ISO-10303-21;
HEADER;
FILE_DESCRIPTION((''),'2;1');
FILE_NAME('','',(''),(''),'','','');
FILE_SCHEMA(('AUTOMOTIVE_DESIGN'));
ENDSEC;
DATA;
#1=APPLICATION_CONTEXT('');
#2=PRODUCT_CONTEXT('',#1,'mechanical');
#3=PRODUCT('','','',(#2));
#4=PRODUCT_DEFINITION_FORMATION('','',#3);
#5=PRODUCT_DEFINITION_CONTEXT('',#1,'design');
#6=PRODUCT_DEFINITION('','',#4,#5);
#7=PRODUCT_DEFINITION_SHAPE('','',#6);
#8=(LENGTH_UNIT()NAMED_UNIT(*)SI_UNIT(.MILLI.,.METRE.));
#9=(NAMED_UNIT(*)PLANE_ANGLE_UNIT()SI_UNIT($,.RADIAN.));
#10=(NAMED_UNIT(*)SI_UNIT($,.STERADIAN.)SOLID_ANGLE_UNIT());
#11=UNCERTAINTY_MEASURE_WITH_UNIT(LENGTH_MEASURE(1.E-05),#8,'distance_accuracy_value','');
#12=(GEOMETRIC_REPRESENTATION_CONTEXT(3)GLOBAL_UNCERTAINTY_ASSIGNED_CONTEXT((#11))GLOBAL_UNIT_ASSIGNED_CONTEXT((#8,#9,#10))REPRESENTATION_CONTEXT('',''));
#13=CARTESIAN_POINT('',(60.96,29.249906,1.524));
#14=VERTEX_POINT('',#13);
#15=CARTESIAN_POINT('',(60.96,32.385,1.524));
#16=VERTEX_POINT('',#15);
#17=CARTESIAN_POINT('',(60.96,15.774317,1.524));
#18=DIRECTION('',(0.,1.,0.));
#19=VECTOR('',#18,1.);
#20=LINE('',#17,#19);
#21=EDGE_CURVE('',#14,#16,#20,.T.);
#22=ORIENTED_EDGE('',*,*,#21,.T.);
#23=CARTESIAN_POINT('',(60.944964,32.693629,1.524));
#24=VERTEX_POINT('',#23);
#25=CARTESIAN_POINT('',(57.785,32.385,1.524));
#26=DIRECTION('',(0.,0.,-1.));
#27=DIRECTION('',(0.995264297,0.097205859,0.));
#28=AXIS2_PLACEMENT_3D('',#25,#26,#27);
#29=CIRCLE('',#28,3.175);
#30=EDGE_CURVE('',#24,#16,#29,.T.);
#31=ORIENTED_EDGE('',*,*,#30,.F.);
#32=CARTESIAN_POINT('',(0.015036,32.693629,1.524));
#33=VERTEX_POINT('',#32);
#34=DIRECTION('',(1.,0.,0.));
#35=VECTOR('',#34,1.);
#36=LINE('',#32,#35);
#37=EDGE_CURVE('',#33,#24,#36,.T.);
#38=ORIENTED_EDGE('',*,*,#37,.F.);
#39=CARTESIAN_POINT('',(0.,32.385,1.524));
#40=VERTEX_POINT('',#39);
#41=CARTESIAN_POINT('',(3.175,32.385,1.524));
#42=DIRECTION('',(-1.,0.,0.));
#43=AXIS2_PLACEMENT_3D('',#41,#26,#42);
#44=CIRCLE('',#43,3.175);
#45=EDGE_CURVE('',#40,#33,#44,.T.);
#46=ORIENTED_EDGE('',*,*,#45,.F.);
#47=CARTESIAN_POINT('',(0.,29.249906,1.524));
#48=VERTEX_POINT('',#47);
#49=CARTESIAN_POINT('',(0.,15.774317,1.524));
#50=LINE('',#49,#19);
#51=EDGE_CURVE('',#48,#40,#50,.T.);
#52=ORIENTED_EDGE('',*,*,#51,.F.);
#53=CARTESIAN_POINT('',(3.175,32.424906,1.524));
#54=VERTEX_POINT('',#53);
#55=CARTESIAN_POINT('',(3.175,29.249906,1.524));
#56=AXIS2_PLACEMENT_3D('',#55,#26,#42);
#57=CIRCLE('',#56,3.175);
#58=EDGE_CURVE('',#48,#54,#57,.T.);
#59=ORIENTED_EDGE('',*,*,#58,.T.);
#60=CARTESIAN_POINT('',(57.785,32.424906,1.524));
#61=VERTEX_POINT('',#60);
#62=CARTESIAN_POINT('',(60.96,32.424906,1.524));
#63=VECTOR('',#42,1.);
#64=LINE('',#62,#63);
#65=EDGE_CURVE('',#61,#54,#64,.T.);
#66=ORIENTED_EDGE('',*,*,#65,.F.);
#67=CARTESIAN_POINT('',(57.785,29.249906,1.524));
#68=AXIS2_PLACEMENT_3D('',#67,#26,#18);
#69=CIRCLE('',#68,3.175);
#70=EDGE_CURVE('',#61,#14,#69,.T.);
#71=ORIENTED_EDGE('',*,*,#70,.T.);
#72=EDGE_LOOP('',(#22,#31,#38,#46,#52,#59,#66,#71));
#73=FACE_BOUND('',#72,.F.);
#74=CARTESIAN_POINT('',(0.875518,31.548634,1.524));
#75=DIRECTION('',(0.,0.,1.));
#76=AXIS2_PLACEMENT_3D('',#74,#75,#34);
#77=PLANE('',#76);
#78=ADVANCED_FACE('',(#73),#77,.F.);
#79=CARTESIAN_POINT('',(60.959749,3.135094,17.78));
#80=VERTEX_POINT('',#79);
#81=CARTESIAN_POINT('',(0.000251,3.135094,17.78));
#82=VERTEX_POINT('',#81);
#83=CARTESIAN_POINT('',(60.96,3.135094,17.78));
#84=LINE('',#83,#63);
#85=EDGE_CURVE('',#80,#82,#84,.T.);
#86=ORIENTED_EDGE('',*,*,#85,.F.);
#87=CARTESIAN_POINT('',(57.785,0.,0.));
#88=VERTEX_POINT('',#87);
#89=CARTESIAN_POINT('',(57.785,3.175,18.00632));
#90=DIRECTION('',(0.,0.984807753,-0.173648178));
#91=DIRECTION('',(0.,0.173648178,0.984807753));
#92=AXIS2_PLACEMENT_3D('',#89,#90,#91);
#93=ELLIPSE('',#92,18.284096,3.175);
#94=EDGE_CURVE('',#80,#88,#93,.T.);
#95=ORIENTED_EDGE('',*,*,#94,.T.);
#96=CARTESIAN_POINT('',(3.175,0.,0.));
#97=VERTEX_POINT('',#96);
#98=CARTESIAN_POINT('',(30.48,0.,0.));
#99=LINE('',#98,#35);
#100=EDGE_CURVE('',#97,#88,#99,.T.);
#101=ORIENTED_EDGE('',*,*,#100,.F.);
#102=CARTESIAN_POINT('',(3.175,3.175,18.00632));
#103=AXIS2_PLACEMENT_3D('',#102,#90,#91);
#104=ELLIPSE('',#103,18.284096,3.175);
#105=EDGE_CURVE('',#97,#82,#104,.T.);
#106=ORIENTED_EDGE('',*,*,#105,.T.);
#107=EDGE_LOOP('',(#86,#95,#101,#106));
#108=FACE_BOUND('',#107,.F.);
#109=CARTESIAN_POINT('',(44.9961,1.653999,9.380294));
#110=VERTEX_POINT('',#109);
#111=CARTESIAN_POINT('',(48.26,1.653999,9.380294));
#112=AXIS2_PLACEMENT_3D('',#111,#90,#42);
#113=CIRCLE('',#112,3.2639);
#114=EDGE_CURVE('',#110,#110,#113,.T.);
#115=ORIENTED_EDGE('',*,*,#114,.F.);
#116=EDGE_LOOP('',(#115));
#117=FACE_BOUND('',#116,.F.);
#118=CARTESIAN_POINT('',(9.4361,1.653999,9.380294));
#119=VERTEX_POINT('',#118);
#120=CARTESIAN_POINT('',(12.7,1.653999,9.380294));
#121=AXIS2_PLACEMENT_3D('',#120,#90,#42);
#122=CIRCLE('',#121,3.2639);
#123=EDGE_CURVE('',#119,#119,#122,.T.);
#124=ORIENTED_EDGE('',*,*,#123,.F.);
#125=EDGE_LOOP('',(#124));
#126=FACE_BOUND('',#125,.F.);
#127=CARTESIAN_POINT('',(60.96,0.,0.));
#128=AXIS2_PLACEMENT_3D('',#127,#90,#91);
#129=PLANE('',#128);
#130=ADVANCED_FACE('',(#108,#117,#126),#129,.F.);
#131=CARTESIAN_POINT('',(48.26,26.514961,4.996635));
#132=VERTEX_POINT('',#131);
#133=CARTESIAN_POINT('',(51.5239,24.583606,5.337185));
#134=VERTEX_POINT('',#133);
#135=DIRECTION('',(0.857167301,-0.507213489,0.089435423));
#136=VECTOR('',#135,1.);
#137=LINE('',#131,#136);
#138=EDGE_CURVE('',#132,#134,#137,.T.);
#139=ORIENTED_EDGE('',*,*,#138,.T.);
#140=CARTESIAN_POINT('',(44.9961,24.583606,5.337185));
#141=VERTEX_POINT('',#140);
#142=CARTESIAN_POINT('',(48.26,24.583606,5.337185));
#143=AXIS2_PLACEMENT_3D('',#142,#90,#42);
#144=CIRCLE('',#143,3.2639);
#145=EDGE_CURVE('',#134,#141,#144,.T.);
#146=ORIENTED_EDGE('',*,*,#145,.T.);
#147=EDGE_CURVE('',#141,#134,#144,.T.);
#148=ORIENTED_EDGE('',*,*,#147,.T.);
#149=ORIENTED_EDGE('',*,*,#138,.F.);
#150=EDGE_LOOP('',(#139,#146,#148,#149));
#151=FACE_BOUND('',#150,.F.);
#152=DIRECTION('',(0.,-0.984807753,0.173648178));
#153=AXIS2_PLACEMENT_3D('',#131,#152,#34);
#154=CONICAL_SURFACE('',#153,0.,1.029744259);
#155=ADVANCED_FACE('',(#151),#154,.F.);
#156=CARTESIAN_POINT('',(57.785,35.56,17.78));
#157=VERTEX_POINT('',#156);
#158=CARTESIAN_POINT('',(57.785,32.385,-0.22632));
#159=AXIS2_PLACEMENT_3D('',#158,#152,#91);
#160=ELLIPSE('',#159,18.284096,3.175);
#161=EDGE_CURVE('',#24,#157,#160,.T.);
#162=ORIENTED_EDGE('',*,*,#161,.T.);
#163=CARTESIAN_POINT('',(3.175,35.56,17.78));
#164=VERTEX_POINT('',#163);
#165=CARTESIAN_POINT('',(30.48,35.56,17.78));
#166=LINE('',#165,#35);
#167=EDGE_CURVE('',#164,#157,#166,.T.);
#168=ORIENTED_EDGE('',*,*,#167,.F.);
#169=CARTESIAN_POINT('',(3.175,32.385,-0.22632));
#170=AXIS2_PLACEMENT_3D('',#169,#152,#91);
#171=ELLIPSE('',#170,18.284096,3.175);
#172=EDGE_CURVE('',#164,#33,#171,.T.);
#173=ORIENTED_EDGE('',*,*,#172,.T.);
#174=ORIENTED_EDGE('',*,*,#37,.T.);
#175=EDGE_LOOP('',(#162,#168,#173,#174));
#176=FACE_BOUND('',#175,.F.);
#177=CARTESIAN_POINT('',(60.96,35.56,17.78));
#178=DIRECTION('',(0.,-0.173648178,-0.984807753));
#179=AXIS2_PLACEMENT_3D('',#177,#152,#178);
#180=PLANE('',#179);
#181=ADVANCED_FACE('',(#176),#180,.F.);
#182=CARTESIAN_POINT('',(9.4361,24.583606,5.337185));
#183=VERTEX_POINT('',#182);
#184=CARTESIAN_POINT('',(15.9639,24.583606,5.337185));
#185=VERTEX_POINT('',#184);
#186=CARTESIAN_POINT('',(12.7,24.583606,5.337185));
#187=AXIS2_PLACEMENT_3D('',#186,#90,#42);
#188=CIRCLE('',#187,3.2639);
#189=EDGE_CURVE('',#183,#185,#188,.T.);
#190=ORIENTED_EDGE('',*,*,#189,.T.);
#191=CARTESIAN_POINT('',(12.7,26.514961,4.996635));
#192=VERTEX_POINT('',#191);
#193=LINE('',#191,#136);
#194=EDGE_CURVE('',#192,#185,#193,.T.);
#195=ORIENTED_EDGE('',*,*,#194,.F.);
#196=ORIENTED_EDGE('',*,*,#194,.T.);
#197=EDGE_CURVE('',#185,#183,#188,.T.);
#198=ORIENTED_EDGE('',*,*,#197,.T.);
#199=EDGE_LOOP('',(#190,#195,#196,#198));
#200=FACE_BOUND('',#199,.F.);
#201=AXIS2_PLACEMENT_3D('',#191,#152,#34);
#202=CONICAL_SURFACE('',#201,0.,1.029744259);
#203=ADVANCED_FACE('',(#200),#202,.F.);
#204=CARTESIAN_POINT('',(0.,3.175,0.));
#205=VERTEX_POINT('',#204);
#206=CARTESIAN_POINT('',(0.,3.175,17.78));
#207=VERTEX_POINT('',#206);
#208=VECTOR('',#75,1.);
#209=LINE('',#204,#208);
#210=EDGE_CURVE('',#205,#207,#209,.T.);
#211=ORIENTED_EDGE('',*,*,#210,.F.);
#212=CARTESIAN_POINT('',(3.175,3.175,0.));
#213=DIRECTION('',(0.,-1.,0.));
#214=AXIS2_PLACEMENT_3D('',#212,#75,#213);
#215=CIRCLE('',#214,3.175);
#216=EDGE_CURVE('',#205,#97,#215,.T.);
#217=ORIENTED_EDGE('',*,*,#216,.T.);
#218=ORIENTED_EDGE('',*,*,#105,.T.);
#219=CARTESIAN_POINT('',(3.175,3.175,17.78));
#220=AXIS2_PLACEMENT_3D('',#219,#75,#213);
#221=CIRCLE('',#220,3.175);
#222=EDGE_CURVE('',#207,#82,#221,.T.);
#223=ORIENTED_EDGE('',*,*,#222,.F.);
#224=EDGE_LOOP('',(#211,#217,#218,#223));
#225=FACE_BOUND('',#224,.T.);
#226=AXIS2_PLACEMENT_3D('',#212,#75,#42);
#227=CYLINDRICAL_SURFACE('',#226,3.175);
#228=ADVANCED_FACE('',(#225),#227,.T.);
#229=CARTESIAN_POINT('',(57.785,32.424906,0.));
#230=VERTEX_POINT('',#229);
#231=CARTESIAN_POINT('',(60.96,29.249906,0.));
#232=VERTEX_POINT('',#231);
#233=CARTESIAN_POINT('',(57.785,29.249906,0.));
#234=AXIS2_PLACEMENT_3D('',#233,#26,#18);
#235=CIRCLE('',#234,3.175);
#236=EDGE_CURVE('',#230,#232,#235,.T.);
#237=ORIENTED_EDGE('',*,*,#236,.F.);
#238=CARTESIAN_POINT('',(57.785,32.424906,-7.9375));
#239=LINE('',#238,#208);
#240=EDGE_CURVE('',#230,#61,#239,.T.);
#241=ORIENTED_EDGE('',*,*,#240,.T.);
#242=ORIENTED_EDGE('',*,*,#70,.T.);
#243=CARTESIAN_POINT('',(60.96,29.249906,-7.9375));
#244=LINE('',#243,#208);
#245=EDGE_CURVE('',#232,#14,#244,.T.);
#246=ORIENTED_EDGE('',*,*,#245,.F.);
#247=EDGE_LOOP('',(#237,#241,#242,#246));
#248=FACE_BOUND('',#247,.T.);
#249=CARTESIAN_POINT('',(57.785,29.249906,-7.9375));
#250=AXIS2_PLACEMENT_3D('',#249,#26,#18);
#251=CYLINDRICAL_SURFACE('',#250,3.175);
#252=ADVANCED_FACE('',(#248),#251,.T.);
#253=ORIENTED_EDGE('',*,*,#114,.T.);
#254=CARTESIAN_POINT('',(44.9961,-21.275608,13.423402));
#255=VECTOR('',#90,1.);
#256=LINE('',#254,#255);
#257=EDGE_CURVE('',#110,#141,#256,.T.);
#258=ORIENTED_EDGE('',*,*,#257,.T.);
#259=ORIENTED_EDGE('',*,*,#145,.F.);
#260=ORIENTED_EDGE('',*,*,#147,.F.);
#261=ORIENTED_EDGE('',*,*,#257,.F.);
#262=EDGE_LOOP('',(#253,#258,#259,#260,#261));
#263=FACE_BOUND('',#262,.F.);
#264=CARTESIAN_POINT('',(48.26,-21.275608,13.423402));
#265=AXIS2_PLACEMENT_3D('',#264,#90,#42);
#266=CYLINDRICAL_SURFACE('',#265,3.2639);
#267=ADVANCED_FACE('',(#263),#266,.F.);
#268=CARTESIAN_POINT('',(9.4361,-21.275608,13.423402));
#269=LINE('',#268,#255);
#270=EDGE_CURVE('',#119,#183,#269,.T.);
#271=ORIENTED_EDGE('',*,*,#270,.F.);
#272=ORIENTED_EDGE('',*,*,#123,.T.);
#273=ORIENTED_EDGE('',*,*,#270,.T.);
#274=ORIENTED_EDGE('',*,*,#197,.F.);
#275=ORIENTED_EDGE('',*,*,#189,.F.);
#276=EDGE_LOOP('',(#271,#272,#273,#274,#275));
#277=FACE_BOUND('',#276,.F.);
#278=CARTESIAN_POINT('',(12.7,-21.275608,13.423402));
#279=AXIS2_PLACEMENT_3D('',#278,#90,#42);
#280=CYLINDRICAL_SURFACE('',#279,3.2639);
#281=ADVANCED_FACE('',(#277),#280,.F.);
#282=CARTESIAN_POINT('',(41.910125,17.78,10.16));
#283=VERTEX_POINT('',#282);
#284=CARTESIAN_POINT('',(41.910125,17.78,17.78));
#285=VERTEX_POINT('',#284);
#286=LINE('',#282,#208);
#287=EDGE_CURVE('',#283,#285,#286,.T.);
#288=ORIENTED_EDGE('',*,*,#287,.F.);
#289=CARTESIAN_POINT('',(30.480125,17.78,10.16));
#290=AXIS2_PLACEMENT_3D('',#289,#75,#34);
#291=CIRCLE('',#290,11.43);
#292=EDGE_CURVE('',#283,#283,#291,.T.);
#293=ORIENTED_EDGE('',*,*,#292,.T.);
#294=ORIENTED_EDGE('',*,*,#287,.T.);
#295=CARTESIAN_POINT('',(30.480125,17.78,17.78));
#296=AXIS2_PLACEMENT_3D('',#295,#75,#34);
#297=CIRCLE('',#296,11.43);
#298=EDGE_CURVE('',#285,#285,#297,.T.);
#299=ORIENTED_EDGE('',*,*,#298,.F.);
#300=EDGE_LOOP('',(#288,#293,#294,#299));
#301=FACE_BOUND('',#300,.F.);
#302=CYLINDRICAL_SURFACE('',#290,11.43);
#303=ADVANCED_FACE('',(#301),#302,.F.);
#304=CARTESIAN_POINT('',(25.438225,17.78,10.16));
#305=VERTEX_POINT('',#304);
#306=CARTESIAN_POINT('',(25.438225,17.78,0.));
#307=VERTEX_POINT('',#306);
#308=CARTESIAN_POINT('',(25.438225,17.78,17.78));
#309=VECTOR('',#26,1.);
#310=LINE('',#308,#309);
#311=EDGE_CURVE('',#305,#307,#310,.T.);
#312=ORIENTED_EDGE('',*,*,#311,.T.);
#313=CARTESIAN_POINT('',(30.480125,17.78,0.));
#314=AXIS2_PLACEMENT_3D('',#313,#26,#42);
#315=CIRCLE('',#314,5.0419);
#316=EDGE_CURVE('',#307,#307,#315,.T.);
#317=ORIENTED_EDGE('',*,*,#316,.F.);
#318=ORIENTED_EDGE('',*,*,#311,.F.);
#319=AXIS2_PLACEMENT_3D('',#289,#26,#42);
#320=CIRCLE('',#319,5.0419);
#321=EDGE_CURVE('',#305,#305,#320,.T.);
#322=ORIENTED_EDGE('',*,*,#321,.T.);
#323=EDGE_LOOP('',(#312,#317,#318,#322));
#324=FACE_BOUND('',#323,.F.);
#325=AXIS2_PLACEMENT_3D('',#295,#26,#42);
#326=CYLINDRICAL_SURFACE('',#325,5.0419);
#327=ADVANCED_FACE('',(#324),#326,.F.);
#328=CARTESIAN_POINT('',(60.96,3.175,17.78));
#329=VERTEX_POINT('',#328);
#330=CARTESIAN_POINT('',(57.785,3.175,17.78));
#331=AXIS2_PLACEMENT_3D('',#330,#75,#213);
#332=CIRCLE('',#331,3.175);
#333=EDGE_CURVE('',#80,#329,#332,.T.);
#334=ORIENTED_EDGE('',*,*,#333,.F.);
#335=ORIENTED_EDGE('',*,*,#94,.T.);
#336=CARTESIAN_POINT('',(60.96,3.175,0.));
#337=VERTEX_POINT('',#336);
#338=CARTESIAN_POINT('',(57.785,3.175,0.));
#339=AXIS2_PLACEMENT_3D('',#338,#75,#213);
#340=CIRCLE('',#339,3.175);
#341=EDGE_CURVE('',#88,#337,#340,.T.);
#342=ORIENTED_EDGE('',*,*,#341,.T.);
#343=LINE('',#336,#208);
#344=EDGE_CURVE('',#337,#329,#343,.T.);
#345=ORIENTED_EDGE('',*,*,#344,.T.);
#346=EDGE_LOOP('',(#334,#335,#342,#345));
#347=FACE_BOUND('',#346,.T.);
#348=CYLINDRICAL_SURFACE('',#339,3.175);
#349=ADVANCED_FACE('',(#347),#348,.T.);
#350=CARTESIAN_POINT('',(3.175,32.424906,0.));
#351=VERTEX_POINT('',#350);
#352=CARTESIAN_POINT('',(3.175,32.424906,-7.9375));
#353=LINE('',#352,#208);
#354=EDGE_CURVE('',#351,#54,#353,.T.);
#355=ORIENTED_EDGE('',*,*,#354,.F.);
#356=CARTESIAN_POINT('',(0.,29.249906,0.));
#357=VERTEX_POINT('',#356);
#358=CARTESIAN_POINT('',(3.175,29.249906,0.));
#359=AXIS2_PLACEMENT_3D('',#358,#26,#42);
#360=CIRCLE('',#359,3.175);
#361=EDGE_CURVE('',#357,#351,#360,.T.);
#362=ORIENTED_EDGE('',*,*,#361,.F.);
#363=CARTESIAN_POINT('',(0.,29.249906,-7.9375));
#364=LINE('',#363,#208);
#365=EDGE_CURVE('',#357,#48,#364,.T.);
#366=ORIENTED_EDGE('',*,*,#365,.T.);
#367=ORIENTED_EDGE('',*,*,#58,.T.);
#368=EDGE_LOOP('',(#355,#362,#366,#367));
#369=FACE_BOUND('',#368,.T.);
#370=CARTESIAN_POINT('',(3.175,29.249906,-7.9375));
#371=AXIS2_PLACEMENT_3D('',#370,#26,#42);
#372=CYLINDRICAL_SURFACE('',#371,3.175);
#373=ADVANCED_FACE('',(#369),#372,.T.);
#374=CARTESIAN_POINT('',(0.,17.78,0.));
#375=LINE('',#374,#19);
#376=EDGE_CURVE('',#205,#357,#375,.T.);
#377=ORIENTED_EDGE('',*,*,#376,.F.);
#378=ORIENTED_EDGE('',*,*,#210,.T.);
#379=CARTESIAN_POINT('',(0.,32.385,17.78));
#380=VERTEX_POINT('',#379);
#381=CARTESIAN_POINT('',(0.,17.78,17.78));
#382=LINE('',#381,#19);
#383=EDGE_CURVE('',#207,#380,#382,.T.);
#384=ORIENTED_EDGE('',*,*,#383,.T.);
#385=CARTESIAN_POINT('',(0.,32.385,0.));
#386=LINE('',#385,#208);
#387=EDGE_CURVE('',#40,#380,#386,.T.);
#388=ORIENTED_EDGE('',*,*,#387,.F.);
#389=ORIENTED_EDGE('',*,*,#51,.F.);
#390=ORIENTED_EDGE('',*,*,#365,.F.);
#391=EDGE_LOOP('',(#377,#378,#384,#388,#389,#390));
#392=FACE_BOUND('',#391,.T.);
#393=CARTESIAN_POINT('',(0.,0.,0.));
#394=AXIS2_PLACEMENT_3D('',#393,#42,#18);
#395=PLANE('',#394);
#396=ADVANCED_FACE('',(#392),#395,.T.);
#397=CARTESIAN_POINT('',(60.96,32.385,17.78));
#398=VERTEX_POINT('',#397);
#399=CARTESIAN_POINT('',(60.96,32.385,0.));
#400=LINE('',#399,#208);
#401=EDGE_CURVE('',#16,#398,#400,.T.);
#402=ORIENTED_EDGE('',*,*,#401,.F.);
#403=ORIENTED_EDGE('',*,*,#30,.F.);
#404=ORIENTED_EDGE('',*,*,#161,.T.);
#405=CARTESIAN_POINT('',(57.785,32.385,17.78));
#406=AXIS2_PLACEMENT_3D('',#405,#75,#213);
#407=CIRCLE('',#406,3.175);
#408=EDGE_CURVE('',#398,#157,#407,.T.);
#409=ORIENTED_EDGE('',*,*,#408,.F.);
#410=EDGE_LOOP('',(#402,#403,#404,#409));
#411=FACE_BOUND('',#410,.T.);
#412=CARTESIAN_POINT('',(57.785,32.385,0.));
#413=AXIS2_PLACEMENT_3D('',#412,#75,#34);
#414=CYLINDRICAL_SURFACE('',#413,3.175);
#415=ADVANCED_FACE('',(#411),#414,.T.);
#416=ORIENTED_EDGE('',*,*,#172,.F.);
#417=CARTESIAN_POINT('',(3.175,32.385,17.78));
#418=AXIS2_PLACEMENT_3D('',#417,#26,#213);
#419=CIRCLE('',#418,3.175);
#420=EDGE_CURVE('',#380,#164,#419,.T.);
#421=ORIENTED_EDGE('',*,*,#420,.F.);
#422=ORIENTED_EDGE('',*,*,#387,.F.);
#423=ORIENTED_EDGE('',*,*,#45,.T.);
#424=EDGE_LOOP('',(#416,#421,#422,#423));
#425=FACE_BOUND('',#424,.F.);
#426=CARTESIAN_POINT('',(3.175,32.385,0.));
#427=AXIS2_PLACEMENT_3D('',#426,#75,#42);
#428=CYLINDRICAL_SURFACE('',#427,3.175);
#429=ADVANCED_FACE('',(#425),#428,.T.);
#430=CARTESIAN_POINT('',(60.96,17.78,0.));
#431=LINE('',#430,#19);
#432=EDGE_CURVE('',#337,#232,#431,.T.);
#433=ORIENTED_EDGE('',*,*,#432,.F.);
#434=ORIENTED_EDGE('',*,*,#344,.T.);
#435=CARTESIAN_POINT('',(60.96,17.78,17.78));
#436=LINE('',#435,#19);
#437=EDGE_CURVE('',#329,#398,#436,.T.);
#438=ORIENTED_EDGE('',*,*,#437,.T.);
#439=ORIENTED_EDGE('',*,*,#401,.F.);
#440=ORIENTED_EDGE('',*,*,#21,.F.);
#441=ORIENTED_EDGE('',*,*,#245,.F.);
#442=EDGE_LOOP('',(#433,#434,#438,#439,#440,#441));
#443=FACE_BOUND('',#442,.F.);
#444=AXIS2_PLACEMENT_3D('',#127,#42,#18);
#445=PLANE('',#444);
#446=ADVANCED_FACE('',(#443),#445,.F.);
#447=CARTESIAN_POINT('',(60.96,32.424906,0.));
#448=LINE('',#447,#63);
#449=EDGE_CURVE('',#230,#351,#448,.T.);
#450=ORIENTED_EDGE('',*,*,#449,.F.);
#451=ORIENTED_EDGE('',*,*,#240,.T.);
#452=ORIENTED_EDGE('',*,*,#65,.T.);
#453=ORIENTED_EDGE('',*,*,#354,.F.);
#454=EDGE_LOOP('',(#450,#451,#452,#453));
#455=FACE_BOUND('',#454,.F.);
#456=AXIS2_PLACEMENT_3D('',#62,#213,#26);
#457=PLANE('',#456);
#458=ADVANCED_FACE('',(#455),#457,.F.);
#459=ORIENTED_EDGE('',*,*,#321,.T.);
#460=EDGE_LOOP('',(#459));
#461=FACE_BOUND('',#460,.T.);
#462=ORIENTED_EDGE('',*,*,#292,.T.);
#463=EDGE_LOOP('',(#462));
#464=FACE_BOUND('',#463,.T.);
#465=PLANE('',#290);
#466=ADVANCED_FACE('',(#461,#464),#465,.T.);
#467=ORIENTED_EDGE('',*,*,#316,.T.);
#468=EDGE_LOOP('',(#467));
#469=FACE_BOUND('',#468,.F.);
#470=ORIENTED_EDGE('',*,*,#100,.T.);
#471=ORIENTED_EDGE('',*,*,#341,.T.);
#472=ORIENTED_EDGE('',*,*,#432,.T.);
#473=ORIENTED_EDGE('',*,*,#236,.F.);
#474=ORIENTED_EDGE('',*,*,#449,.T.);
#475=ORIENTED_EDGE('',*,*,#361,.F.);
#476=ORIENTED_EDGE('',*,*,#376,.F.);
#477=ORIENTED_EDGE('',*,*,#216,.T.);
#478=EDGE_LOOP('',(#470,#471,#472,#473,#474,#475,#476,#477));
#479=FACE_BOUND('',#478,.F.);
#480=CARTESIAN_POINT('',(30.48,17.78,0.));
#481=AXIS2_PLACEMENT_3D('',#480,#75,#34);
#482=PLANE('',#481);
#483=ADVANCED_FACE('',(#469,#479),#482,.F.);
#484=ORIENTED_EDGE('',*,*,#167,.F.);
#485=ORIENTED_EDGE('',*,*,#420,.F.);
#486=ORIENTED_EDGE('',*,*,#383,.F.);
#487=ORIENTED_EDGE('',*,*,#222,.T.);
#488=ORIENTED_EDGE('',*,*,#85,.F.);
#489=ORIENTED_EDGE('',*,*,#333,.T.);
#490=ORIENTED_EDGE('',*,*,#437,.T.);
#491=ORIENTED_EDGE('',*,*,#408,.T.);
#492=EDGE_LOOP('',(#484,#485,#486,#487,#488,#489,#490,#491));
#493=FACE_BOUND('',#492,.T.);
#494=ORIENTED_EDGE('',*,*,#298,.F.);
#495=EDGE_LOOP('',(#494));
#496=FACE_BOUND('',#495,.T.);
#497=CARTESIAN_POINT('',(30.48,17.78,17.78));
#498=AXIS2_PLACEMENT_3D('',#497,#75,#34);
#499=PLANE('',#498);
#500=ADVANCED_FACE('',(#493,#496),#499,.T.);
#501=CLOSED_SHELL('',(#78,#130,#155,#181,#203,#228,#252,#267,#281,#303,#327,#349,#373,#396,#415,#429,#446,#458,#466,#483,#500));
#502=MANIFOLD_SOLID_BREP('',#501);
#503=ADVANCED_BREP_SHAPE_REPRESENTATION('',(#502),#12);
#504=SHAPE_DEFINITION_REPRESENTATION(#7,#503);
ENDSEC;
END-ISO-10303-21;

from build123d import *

# Parameters (mm, degrees)
F0_W           = 60.96
F0_H           = 35.56
F1_DEPTH       = 17.78
F2_R           = 3.175
F4_DEPTH       = 60.961
F6_D           = 10.0838
F6_DEPTH       = 23.2918
F6_CBORE_D     = 22.86
F6_CBORE_DEPTH = 7.62
F6_TIP         = 3.0294791551
F7_T1_DEPTH    = 9.4615000248
F9_D           = 6.5278
F9_DEPTH       = 23.2833333333
F9_TIP         = 1.9611489744


# Not quite as in the source:
# - a fillet or chamfer that OpenCascade refuses, or shapes differently, is made with other operations: its cross-section is extruded or revolved along the edge and cut away or added
# - a feature names something its author has since deleted; it is built from what else it names


with BuildPart() as f1:
    # F0 (on Top) → F1 (new body)
    with BuildSketch(Plane.XY):
        with Locations((30.48, 17.78)):
            Rectangle(F0_W, F0_H)
    extrude(amount=F1_DEPTH)

    # F2
    f2_edges = [f1.edges().sort_by_distance(p)[0] for p in [
        (0, 0, 8.89),
        (60.96, 0, 8.89),
        (60.96, 35.56, 8.89),
        (0, 35.56, 8.89),
    ]]
    fillet(f2_edges, radius=F2_R)

    # F3 (on face) → F4 (cut, through all)
    with BuildSketch(Plane.YZ.offset(60.96)):
        Polygon((0, 17.78), (0, 0), (3.135093717, 17.78), align=None)
        Polygon((32.424906283, 1.524), (32.424906283, 0), (35.56, 0), (35.56, 17.78), (32.6936286016, 1.524), align=None)
    extrude(amount=-F4_DEPTH, mode=Mode.SUBTRACT)

    # F6
    with Locations(Plane.XY.offset(17.78)):
        with Locations((30.4801253996, 17.78)):
            CounterBoreHole(F6_D / 2, F6_CBORE_D / 2, F6_CBORE_DEPTH, depth=F6_DEPTH)
            with Locations((0, 0, -(F6_DEPTH + F6_TIP / 2))):  # 118° drill point
                Cone(0, F6_D / 2, F6_TIP, mode=Mode.SUBTRACT)

    # F7: fillet of radius 3.175 on 2 edges, made by hand

    # F7_s2 → F7_t1 (cut)
    with BuildSketch(Plane.XY.offset(-7.9375000248)):
        with BuildLine():
            ThreePointArc((57.785, 32.424906283), (60.0300640303, 31.4949703133), (60.96, 29.249906283))
            Line((60.96, 29.249906283), (61.2775, 29.249906283))
            ThreePointArc((61.2775, 29.249906283), (61.2775, 32.385), (61.277224121, 32.4288969113))
            Line((61.277224121, 32.4288969113), (60.9597492009, 32.742406283))
            Line((60.9597492009, 32.742406283), (57.785, 32.742406283))
            Line((57.785, 32.742406283), (57.785, 32.424906283))
        make_face()
        with BuildLine():
            ThreePointArc((0, 29.249906283), (0.9299359697, 31.4949703133), (3.175, 32.424906283))
            Line((3.175, 32.424906283), (3.175, 32.742406283))
            Line((3.175, 32.742406283), (0.0002507991, 32.742406283))
            Line((0.0002507991, 32.742406283), (-0.317224121, 32.4288969113))
            ThreePointArc((-0.317224121, 32.4288969113), (-0.3175, 32.385), (-0.3175, 29.249906283))
            Line((-0.3175, 29.249906283), (0, 29.249906283))
        make_face()
    extrude(amount=F7_T1_DEPTH, mode=Mode.SUBTRACT)

    # F9
    with Locations(Plane(origin=(0, 0, 0), x_dir=(1, 0, 0), z_dir=(0, -0.984807753, 0.1736481777))):
        with Locations((12.7, 9.525), (48.26, 9.525)):
            Hole(F9_D / 2, depth=F9_DEPTH)
            with Locations((0, 0, -(F9_DEPTH + F9_TIP / 2))):  # 118° drill point
                Cone(0, F9_D / 2, F9_TIP, mode=Mode.SUBTRACT)


solid = f1.part
